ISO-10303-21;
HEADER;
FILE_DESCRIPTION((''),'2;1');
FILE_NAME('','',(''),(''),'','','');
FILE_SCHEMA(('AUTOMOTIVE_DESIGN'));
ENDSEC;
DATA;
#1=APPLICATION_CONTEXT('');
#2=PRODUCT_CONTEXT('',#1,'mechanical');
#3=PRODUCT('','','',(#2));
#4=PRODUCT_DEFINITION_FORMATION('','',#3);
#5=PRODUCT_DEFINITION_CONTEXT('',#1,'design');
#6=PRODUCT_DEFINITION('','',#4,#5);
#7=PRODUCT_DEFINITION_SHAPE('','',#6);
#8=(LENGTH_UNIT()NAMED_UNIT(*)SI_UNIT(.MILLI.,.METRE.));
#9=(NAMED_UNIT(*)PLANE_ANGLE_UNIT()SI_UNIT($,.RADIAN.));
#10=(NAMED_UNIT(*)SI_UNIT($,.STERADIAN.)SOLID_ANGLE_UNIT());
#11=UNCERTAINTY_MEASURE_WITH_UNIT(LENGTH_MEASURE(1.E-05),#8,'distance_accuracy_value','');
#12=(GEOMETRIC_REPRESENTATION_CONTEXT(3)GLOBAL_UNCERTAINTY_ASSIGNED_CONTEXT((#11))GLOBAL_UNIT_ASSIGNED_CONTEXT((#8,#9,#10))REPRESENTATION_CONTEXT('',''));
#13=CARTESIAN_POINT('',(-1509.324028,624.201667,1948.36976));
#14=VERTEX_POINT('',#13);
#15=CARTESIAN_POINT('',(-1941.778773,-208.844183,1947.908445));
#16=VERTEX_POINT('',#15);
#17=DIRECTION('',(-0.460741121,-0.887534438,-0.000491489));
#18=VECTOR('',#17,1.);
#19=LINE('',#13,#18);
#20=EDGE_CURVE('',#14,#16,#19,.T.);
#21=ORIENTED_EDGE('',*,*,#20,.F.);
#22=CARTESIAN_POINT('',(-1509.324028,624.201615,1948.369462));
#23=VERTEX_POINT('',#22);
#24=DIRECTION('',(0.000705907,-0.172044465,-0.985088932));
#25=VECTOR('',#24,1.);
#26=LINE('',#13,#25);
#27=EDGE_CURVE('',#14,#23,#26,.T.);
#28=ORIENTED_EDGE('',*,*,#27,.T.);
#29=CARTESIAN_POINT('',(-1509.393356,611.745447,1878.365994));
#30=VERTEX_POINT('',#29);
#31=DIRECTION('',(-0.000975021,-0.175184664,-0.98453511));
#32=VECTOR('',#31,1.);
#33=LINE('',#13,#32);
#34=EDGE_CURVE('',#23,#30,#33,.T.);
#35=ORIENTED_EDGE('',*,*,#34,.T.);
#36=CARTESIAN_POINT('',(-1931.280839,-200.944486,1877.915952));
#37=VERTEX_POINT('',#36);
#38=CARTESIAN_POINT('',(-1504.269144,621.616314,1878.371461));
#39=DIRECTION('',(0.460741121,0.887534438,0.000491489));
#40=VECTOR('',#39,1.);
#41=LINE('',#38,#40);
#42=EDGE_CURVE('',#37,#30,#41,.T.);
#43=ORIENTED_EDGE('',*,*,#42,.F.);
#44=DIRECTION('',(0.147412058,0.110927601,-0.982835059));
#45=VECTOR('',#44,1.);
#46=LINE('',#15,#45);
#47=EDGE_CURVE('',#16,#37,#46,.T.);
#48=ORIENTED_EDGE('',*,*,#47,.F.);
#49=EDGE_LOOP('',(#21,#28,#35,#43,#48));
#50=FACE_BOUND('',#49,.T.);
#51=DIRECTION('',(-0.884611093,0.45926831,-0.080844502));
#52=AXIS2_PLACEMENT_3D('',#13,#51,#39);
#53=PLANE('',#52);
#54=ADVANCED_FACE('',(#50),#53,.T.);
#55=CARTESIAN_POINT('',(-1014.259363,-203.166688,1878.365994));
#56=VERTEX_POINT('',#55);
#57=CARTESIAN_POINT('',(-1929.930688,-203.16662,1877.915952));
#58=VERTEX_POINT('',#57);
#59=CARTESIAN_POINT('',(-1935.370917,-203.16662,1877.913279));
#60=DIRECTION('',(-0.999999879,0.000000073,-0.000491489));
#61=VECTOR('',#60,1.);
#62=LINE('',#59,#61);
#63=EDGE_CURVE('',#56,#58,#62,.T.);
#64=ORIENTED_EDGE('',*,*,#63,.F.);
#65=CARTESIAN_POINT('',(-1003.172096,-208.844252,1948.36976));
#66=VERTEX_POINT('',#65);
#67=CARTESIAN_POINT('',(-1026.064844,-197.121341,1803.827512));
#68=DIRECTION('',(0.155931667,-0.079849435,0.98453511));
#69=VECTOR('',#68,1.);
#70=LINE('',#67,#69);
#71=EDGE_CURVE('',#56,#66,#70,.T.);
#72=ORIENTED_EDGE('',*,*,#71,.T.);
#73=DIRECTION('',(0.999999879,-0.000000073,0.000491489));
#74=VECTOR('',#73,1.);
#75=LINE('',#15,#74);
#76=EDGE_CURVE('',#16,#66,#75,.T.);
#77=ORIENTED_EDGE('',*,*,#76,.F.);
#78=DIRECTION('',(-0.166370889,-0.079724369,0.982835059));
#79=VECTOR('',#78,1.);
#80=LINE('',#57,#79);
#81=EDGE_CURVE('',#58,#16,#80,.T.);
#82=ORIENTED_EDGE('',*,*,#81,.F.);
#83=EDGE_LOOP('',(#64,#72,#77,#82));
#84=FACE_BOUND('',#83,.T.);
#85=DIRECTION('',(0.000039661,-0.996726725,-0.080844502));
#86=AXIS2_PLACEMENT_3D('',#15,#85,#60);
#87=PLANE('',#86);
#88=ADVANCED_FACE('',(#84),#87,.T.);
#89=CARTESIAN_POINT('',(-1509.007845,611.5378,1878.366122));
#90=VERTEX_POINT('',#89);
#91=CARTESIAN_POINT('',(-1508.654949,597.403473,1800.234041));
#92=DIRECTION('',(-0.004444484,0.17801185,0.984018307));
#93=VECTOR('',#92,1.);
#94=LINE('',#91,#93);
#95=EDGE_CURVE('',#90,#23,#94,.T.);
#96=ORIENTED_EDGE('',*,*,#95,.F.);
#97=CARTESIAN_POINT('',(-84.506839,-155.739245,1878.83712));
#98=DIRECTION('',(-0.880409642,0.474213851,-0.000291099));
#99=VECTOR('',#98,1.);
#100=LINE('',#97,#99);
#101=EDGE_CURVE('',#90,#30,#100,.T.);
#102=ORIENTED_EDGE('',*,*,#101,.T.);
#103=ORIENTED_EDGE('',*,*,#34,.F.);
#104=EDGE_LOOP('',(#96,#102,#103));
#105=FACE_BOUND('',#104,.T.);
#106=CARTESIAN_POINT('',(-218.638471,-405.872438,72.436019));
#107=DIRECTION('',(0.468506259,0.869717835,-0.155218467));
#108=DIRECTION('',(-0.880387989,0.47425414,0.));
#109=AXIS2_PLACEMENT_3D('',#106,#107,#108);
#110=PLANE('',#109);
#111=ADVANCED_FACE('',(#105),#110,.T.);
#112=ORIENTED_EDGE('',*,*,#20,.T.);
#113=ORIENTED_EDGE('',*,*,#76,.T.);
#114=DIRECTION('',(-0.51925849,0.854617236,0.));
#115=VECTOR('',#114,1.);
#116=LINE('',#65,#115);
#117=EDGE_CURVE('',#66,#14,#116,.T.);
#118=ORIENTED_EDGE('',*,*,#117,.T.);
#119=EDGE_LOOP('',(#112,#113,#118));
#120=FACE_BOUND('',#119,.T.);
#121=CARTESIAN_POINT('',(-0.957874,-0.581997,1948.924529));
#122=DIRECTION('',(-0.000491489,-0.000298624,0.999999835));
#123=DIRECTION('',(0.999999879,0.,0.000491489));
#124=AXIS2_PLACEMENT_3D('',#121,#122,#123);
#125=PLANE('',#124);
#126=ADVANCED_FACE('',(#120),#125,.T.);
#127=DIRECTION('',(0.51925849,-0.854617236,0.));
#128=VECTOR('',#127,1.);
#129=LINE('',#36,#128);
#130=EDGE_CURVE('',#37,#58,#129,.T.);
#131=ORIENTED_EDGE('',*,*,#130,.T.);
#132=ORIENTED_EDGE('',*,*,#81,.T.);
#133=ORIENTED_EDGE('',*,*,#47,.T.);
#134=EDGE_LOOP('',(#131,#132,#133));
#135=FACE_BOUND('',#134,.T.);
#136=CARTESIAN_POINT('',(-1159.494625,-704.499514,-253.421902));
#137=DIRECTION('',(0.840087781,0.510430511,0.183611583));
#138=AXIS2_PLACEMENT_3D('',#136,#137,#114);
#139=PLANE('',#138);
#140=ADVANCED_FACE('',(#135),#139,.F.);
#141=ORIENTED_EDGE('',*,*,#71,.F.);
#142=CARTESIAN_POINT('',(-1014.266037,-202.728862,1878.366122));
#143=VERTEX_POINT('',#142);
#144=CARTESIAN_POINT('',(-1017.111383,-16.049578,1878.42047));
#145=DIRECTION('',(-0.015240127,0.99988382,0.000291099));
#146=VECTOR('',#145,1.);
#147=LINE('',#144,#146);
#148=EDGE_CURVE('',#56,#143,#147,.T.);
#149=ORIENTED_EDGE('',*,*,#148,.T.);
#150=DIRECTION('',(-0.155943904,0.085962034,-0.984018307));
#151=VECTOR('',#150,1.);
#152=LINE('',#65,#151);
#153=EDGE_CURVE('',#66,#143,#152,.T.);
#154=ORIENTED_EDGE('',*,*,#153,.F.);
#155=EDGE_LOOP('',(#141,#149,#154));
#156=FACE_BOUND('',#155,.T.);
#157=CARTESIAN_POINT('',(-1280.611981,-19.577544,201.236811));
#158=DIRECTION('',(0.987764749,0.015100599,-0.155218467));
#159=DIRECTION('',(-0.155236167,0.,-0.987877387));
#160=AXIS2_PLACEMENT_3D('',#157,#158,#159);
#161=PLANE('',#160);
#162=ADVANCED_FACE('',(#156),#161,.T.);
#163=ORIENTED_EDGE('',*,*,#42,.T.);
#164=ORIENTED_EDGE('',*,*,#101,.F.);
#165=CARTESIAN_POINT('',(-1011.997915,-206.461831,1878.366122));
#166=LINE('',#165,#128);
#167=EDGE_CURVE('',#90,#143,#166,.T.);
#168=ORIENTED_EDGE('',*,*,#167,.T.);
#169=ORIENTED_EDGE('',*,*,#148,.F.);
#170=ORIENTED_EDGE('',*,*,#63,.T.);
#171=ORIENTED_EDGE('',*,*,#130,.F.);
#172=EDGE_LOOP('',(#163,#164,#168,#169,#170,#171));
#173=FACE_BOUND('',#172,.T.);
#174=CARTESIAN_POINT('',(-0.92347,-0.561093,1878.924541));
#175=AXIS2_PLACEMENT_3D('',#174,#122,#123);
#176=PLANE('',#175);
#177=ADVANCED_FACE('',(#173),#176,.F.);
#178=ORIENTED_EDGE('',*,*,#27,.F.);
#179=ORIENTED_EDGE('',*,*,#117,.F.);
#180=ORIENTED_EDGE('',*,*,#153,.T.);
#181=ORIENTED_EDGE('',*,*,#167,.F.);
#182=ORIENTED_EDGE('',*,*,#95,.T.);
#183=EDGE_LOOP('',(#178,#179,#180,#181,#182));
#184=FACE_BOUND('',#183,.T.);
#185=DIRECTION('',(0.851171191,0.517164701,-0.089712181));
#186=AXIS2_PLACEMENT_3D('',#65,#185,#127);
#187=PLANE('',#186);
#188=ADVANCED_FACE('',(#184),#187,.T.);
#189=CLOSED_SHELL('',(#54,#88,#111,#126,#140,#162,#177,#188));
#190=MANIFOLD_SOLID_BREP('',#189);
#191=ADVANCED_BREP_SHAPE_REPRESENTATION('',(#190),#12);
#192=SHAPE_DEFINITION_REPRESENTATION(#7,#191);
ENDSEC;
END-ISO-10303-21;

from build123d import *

# Parameters (mm, degrees)
BOSS_EXTRUDE1_DEPTH = 70
CHAMFER1_SIZE2      = 5.656659752
CHAMFER1_SIZE       = 70
CHAMFER2_SIZE2      = 5.656659752
CHAMFER2_SIZE       = 70
CHAMFER3_SIZE2      = 6.345862846
CHAMFER3_SIZE       = 70
SKETCH3_W           = 71.265106757
SKETCH3_H           = 1.348372647
CUT_EXTRUDE1_DEPTH  = 10
SKETCH4_W           = 97.217574519
SKETCH4_H           = 25.906089707
CUT_EXTRUDE2_DEPTH  = 10
CUT_EXTRUDE3_DEPTH  = 15


with BuildPart() as part:
    # Sketch1 → Boss-Extrude1 (new body)
    with BuildSketch(Plane(origin=(-0.957874252, -0.581996614, 1948.924528972), x_dir=(0.9999998792194947, -1.4677051691166262e-07, 0.0004914885295678381), z_dir=(-0.0004914885514824738, -0.00029862445089364614, 0.999999834631207))):
        Polygon((-1508.366336361, 624.783470122), (-1940.821133222, -208.262480206), (-1002.214342981, -208.262411326), align=None)
    extrude(amount=-BOSS_EXTRUDE1_DEPTH)

    # Chamfer1
    chamfer1_edges = [part.edges().sort_by_distance(p)[0] for p in [
        (-1725.516996548, 207.69964589, 1878.139114193),
    ]]
    chamfer1_side = [part.faces().sort_by_distance(p)[0] for p in [
        (-1725.517052151, 207.699612105, 1878.252247369),
    ]]
    chamfer(chamfer1_edges, length=CHAMFER1_SIZE - 0.0001, length2=CHAMFER1_SIZE2 - 0.0001, reference=chamfer1_side[0])  # a hair under: the kernel refuses the full size

    # Chamfer2
    chamfer2_edges = [part.edges().sort_by_distance(p)[0] for p in [
        (-1469.254360498, -208.82331364, 1878.140680405),
    ]]
    chamfer2_side = [part.faces().sort_by_distance(p)[0] for p in [
        (-1469.254416102, -208.823347425, 1878.253813581),
    ]]
    chamfer(chamfer2_edges, length=CHAMFER2_SIZE - 0.0001, length2=CHAMFER2_SIZE2 - 0.0001, reference=chamfer2_side[0])  # a hair under: the kernel refuses the full size

    # Chamfer3
    chamfer3_edges = [part.edges().sort_by_distance(p)[0] for p in [
        (-1256.21365811, 207.69961145, 1878.369771439),
    ]]
    chamfer3_side = [part.faces().sort_by_distance(p)[0] for p in [
        (-1256.213720488, 207.699573549, 1878.496688675),
    ]]
    chamfer(chamfer3_edges, length=CHAMFER3_SIZE - 0.0001, length2=CHAMFER3_SIZE2 - 0.0001, reference=chamfer3_side[0])  # a hair under: the kernel refuses the full size

    # Sketch3 → Cut-Extrude1 (cut)
    with BuildSketch(Plane(origin=(-1471.025902014, 77.181437246, -1001.088177066), x_dir=(-0.012766042139118148, 0.1823400765961239, 0.9831526456430975), z_dir=(0.4685062593771071, 0.8697178350344407, -0.1552184665156707))):
        with Locations((2964.367143604, -0.674186324)):
            Rectangle(SKETCH3_W, SKETCH3_H)
    extrude(amount=CUT_EXTRUDE1_DEPTH, mode=Mode.SUBTRACT)

    # Sketch4 → Cut-Extrude2 (cut)
    with BuildSketch(Plane(origin=(-1471.025902014, 77.181437246, -1001.088177066), x_dir=(0.15595126860972144, -0.09534189626809239, 0.9831526456430979), z_dir=(-0.9877647491052985, -0.015100598579889693, 0.155218466515669))):
        with Locations((2960.985531457, 3.24314791)):
            Rectangle(SKETCH4_W, SKETCH4_H)
    extrude(amount=-CUT_EXTRUDE2_DEPTH, mode=Mode.SUBTRACT)

    # 3DSketch1 → Cut-Extrude3 (cut, along a direction that is not the sketch's normal)
    with BuildSketch(Plane(origin=(-1931.280839181, -200.944485541, 1877.915952454), x_dir=(-0.14741205849129177, -0.11092760059742722, 0.9828350586121039), z_dir=(0.8400877812574963, 0.510430510798338, 0.18361158304422126))):
        Polygon((0, 0), (0.047467536, 2.599718778), (71.214892371, 0), align=None)
    extrude(amount=-CUT_EXTRUDE3_DEPTH, dir=(-0.0004914885514824738, -0.0002986244508937508, 0.9999998346312069), mode=Mode.SUBTRACT)


solid = part.part
